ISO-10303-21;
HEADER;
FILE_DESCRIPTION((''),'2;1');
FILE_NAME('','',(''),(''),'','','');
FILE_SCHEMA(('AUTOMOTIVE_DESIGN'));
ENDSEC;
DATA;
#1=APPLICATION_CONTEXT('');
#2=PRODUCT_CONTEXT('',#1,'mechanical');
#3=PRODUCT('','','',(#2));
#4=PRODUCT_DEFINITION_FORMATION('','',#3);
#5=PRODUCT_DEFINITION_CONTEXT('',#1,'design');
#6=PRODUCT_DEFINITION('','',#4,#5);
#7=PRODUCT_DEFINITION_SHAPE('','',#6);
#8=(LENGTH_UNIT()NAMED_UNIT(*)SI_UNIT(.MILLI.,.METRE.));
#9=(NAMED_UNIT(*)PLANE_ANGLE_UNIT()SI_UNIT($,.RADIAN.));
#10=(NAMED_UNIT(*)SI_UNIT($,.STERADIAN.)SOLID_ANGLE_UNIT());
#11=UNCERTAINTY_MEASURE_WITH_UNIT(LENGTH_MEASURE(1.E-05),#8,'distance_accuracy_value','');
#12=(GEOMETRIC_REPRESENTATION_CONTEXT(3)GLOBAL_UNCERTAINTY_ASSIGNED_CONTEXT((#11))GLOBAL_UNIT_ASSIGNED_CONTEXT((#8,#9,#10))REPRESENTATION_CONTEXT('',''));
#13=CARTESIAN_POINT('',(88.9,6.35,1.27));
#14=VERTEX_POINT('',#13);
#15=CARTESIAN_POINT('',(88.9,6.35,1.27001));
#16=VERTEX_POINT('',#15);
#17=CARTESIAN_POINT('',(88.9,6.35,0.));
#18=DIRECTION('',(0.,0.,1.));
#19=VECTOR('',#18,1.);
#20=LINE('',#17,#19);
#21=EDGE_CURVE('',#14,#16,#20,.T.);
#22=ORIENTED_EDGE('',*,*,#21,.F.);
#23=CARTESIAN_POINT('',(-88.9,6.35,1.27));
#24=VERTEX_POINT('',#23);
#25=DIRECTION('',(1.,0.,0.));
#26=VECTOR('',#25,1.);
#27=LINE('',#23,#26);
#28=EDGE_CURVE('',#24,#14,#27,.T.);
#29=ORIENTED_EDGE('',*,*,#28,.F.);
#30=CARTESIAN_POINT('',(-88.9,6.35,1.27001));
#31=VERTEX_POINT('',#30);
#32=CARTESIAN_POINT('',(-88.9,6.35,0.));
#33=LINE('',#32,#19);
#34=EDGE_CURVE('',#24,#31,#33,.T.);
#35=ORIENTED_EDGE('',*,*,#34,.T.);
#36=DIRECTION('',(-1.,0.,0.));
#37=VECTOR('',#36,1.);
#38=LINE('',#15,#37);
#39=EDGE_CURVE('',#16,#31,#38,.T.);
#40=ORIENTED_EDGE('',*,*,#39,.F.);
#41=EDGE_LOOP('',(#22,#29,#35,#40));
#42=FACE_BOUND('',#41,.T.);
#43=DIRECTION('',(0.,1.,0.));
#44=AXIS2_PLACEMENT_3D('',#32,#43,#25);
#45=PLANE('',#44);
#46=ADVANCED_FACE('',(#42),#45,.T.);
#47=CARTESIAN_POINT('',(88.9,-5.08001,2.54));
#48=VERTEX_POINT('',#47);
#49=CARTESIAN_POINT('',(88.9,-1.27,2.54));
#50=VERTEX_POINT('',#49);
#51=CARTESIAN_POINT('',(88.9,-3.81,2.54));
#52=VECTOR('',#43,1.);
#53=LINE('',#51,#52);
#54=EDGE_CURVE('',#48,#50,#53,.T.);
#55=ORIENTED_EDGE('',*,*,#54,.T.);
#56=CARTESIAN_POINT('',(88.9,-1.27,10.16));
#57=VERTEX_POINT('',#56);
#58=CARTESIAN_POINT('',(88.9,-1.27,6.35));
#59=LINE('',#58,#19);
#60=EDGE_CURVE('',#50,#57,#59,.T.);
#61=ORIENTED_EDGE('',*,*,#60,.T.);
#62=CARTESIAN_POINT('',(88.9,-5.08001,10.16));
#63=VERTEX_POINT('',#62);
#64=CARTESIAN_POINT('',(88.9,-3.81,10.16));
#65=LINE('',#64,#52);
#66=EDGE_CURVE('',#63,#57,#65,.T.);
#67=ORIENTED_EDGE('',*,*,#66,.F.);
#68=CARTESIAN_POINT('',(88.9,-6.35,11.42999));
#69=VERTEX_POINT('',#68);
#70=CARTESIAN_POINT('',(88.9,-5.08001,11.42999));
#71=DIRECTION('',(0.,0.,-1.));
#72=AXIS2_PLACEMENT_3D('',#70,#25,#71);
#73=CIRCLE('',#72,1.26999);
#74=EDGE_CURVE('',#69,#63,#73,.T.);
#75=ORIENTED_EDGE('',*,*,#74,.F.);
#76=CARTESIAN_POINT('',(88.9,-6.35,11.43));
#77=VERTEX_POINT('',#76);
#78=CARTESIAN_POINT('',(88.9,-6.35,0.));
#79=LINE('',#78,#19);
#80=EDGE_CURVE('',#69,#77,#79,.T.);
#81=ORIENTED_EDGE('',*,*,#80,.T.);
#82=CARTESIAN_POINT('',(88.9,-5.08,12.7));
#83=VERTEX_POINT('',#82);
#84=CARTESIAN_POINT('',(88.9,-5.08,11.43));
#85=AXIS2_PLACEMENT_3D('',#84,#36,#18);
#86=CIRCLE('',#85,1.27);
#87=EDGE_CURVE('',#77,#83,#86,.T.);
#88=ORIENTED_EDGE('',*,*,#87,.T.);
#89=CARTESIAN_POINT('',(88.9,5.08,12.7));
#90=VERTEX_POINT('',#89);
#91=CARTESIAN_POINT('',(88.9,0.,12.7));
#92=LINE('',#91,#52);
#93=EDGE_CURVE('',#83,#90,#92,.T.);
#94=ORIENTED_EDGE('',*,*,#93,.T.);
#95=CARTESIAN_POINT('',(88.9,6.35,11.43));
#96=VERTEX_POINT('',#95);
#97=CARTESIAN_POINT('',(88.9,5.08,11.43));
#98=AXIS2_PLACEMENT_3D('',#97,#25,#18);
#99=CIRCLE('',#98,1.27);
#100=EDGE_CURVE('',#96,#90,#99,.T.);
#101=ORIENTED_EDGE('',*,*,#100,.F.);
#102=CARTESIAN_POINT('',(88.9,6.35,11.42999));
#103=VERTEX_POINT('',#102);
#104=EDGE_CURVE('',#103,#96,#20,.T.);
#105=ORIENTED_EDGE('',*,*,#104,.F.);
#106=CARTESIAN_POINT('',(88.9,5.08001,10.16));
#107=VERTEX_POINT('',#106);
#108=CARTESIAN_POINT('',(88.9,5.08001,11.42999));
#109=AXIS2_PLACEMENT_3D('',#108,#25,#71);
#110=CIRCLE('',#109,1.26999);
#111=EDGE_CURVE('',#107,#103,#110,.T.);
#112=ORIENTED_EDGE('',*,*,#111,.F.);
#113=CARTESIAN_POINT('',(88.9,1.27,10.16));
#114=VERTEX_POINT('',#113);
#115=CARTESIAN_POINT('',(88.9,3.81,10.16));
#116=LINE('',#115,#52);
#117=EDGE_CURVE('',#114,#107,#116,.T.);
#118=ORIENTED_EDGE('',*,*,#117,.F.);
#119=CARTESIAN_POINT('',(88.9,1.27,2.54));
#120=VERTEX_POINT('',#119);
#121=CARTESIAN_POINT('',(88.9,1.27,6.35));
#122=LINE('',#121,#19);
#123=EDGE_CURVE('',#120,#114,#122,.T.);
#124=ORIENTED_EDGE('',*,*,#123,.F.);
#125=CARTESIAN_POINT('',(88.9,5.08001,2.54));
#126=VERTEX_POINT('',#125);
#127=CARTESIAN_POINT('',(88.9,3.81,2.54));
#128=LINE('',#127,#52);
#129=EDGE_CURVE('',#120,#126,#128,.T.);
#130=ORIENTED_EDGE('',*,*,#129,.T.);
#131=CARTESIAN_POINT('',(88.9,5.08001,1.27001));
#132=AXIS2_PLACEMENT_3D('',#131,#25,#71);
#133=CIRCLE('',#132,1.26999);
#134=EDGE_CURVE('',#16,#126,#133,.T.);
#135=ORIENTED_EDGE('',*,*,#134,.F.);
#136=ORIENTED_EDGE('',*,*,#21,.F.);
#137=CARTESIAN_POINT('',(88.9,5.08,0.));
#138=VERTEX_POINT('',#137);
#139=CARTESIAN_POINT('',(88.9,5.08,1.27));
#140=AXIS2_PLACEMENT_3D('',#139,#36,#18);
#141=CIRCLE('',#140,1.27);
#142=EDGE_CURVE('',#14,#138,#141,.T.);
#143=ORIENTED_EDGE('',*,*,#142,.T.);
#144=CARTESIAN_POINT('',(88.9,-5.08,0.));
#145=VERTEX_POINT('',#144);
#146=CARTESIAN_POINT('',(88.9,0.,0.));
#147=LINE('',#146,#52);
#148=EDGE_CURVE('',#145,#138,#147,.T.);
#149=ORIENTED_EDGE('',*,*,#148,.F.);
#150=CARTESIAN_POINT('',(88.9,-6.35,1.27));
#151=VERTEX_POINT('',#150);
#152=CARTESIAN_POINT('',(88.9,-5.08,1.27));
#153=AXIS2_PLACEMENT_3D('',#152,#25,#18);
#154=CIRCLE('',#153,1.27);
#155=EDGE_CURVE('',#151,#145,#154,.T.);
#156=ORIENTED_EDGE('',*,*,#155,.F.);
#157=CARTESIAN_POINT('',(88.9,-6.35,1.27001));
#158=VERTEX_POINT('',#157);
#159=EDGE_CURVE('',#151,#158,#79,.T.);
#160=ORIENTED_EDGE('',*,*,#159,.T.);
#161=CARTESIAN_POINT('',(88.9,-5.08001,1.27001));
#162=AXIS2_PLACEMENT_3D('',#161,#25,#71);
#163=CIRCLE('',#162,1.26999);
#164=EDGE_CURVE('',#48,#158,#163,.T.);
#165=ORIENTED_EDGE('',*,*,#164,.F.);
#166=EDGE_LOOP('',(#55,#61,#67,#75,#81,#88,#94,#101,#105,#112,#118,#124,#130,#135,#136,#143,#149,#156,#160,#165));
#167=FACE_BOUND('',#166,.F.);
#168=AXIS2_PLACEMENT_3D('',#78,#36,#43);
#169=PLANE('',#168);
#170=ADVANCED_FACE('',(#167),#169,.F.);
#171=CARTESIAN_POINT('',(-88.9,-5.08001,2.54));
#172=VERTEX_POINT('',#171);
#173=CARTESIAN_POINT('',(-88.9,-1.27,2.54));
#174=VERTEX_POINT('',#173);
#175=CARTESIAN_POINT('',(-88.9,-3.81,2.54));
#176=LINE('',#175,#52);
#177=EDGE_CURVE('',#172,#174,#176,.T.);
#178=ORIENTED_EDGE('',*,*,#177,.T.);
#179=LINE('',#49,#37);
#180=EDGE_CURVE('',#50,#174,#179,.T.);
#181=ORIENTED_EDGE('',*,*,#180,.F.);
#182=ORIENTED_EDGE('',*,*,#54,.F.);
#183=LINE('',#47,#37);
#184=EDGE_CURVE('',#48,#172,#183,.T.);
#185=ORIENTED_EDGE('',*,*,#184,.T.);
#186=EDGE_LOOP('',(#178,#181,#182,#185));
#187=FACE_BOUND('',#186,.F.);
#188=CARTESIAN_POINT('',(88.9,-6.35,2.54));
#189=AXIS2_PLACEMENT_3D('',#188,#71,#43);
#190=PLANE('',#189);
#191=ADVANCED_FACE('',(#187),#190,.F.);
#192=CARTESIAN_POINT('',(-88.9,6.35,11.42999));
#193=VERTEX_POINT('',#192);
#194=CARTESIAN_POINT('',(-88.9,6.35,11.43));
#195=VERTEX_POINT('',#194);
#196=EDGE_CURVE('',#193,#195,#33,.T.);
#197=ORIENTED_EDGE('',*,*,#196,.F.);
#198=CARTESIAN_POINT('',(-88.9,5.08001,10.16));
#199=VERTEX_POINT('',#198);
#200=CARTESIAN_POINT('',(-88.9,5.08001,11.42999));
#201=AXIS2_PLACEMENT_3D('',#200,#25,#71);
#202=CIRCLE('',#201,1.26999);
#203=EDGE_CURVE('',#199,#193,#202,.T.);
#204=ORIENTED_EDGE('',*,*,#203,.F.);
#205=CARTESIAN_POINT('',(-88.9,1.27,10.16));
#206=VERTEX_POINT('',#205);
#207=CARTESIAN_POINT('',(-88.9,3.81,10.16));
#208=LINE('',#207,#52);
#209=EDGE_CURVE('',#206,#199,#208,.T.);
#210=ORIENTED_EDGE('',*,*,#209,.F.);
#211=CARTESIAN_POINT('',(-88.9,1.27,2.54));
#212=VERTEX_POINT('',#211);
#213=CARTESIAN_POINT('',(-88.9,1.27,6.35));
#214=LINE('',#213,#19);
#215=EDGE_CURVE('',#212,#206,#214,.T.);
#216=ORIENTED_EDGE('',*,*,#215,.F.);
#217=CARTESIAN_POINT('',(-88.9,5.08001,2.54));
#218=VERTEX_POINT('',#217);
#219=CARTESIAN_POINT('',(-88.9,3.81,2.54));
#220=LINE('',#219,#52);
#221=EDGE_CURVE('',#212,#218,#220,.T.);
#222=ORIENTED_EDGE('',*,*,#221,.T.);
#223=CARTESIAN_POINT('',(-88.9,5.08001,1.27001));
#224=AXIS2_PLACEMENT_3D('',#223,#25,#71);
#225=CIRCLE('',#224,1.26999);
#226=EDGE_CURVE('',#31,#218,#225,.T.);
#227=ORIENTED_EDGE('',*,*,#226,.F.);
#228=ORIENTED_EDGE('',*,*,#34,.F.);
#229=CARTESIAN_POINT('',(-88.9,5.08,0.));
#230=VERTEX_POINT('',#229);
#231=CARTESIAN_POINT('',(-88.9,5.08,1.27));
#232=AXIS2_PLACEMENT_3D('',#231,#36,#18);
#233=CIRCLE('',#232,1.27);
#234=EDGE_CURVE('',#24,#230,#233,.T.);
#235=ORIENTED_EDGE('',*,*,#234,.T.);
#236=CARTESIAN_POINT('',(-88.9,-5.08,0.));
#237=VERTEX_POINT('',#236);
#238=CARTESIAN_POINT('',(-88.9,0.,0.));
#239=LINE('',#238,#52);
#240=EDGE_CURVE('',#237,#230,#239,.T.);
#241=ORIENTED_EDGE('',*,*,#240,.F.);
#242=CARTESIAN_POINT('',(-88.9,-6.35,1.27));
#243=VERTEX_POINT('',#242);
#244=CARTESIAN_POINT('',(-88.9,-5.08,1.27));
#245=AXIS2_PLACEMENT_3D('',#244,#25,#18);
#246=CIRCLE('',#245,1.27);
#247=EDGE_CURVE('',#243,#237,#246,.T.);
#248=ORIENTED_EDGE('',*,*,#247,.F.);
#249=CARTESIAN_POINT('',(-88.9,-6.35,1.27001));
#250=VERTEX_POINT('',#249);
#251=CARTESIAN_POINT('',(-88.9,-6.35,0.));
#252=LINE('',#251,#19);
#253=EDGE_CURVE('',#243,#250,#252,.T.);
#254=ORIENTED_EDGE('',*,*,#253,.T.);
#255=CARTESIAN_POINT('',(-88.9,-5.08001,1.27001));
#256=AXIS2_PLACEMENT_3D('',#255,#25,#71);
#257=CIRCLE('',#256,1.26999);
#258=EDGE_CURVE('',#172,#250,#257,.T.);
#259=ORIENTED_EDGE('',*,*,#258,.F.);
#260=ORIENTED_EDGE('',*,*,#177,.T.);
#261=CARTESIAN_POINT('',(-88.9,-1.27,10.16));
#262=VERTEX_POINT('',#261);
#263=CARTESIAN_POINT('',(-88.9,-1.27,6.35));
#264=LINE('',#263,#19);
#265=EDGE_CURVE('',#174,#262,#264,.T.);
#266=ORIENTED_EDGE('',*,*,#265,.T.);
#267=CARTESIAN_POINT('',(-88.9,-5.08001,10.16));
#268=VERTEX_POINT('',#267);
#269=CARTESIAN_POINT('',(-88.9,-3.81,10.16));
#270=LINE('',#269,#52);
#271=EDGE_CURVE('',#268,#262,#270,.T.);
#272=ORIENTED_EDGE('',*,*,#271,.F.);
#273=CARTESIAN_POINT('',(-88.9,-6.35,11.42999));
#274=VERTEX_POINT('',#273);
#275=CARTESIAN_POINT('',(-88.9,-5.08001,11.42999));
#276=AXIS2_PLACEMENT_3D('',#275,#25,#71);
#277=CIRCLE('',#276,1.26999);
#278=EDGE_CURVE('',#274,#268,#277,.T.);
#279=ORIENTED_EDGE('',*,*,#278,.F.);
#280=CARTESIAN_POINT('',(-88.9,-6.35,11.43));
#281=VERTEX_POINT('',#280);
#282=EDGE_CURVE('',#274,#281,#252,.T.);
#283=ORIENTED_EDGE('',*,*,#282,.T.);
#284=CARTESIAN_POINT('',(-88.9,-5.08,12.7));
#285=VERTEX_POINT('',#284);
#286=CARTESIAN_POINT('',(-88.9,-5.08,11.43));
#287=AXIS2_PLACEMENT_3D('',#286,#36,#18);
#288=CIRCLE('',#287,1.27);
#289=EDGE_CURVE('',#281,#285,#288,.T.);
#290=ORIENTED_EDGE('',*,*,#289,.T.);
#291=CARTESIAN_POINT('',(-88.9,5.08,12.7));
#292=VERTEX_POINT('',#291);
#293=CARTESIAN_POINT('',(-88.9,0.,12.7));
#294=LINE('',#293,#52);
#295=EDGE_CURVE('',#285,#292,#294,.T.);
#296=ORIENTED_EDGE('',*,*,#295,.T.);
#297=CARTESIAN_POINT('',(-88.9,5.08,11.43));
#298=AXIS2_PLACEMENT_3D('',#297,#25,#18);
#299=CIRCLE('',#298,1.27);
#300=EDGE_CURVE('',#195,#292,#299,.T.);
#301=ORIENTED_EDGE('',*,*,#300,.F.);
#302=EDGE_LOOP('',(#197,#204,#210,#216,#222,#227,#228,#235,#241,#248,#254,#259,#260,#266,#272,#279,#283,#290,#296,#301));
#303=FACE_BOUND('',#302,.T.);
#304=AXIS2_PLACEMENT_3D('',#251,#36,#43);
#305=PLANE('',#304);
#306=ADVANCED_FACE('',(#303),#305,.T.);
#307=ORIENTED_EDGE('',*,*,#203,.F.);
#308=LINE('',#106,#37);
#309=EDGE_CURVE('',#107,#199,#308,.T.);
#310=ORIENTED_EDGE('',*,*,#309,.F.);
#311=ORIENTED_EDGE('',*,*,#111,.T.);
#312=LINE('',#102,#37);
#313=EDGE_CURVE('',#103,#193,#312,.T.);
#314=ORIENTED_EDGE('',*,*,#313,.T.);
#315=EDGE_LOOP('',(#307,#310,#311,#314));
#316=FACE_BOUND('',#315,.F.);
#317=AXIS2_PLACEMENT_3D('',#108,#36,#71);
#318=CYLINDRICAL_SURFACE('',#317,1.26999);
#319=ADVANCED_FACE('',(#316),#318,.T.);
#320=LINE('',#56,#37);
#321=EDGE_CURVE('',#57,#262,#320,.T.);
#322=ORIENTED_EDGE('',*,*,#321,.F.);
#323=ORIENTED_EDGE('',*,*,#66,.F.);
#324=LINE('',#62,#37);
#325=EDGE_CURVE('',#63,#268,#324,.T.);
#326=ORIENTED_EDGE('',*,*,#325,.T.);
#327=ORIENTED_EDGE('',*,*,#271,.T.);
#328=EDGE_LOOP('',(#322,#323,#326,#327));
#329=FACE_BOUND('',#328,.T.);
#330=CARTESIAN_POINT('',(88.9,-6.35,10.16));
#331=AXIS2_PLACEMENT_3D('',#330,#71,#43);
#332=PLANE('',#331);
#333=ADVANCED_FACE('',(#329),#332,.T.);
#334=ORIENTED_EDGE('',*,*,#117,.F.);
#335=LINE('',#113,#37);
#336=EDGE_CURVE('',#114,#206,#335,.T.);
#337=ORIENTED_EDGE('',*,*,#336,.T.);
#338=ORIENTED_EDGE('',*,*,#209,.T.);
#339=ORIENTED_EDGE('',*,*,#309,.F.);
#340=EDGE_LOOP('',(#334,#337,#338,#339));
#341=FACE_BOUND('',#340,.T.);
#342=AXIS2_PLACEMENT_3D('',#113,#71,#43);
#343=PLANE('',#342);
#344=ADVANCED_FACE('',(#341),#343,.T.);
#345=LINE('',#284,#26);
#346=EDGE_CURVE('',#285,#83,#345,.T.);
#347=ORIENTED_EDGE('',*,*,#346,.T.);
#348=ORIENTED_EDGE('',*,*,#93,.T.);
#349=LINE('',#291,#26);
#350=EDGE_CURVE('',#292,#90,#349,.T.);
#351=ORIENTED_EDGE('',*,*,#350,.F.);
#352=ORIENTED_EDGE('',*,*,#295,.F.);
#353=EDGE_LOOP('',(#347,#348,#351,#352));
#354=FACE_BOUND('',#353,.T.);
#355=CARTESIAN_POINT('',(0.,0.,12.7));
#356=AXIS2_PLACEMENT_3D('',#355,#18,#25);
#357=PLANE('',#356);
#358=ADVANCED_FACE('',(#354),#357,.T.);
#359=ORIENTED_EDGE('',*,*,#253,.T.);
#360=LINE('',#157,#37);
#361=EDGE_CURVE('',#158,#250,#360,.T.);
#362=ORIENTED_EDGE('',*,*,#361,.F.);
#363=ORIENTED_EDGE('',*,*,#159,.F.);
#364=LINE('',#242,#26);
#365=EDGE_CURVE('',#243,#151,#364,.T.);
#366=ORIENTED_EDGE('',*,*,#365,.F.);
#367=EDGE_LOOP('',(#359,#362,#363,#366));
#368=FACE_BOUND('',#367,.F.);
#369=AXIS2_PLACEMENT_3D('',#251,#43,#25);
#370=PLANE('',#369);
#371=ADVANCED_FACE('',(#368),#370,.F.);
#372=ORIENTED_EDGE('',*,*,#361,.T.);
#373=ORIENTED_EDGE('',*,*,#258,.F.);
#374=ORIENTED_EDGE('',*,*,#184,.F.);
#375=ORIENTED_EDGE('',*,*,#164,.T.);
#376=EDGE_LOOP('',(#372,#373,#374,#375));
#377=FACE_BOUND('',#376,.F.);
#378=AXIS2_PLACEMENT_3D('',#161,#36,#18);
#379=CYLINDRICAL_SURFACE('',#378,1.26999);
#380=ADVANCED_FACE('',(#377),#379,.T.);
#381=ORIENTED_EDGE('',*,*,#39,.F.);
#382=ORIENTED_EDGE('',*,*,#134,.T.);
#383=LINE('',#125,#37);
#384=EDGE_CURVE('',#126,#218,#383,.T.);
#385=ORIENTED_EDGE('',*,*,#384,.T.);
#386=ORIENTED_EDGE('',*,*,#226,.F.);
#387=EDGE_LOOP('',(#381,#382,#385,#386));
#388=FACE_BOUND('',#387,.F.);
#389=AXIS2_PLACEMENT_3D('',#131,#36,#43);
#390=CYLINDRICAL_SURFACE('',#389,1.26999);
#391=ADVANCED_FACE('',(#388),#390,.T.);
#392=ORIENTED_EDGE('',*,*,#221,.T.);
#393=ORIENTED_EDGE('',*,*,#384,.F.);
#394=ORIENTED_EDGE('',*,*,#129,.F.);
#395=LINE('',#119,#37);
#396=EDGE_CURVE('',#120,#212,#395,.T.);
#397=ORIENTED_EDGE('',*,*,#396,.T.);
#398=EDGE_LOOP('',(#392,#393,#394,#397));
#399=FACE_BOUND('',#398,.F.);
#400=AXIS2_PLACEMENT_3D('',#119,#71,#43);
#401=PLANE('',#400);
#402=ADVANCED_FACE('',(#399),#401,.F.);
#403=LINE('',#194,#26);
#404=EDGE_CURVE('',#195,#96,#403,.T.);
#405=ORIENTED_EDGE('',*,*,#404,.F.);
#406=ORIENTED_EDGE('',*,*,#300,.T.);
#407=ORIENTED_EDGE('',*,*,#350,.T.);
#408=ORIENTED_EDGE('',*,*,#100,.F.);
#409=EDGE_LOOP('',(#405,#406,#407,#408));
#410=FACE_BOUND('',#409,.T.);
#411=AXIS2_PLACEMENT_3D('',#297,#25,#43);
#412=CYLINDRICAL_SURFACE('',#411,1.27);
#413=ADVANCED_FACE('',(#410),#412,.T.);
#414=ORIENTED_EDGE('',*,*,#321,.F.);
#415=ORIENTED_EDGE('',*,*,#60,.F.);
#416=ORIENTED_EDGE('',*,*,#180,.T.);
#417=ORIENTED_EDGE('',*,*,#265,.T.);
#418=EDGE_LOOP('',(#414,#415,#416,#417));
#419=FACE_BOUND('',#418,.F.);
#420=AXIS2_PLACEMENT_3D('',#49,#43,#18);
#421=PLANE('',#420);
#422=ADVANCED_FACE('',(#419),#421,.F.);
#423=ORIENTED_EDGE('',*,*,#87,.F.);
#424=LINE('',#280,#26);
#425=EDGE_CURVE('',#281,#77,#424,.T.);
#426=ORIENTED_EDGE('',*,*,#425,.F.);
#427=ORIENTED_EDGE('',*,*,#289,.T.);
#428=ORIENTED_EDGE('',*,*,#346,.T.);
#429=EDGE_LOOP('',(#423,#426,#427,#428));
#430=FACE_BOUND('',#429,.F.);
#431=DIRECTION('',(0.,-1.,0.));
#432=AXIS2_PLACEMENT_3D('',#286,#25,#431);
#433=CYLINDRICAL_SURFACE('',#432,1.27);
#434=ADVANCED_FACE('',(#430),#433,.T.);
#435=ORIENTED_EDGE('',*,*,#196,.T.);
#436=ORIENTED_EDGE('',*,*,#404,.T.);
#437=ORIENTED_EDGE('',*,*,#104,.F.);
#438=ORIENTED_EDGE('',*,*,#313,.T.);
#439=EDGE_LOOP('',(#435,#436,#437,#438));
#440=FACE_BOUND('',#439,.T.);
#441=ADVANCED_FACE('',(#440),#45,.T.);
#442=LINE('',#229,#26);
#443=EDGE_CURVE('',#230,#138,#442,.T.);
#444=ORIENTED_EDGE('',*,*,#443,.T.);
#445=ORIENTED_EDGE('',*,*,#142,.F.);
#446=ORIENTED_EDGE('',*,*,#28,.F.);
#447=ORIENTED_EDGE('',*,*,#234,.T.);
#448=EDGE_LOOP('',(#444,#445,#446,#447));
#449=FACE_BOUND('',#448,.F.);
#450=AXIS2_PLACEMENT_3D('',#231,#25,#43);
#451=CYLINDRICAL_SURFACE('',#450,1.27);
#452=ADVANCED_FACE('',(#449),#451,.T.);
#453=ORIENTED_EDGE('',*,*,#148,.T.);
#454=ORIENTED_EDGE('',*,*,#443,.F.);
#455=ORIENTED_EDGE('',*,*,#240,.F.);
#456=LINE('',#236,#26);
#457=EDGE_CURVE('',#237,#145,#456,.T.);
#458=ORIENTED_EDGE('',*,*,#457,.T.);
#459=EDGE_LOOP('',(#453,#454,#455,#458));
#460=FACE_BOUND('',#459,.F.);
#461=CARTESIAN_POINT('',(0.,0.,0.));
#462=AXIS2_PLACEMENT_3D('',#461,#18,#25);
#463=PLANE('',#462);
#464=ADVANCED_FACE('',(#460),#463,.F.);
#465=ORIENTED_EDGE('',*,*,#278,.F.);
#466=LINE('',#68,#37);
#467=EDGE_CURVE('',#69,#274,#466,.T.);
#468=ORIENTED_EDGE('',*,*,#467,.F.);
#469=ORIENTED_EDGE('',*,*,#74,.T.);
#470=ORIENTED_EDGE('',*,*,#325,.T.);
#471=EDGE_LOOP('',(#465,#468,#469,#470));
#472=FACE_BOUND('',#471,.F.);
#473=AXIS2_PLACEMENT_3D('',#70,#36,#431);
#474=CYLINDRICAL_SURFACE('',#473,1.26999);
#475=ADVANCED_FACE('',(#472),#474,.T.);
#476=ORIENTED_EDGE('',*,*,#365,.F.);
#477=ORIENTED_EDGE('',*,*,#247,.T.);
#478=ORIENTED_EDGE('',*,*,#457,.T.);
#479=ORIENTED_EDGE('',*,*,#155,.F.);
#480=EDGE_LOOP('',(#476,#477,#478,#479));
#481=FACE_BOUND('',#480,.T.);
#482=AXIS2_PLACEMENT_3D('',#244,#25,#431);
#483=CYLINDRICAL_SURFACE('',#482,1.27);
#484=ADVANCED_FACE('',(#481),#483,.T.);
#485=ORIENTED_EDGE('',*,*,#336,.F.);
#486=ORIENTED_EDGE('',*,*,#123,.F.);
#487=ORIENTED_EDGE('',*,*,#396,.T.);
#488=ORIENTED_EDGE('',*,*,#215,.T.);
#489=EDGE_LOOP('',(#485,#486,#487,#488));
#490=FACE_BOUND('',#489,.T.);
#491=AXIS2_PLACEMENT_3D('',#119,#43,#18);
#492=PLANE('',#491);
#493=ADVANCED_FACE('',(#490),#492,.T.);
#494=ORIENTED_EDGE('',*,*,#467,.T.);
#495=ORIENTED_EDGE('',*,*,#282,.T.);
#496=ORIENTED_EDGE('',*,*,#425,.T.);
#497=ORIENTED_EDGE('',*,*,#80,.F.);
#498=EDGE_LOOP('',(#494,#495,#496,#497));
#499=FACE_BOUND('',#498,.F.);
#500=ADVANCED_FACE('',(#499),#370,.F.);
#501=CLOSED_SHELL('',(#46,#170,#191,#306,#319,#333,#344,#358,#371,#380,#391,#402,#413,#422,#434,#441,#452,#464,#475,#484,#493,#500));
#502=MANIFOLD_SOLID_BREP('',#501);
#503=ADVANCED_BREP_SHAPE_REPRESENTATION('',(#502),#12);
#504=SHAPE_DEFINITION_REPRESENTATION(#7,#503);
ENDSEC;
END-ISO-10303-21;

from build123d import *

# Parameters (mm, degrees)
F0_W     = 177.8
F0_H     = 12.7
F1_DEPTH = 12.7
F2_R     = 1.27
F3_W     = 5.08
F3_H     = 7.62
F4_DEPTH = 177.8
F5_R     = 1.26999


# Not quite as in the source:
# - a fillet or chamfer is up to 0.001 mm smaller than in the source, because OpenCascade refuses the exact size


with BuildPart() as f1:
    # F0 (on Top) → F1 (new body)
    with BuildSketch(Plane.XY):
        Rectangle(F0_W, F0_H)
    extrude(amount=F1_DEPTH)

    # F2
    f2_edges = [f1.edges().sort_by_distance(p)[0] for p in [
        (0, 6.35, 0),
        (0, -6.35, 12.7),
        (0, -6.35, 0),
        (0, 6.35, 12.7),
    ]]
    fillet(f2_edges, radius=F2_R)

    # F3 (on face) → F4 (cut)
    with BuildSketch(Plane.YZ.offset(88.9)):
        with Locations((-3.81, 6.35)):
            Rectangle(F3_W, F3_H)
        with Locations((3.81, 6.35)):
            Rectangle(F3_W, F3_H)
    extrude(amount=-F4_DEPTH, mode=Mode.SUBTRACT)

    # F5 (radius 1.27 in the source; OpenCascade refuses exactly that, so slightly less here)
    f5_edges = [f1.edges().sort_by_distance(p)[0] for p in [
        (0, -6.35, 10.16),
        (0, -6.35, 2.54),
        (0, 6.35, 10.16),
        (0, 6.35, 2.54),
    ]]
    fillet(f5_edges, radius=F5_R)


solid = f1.part
